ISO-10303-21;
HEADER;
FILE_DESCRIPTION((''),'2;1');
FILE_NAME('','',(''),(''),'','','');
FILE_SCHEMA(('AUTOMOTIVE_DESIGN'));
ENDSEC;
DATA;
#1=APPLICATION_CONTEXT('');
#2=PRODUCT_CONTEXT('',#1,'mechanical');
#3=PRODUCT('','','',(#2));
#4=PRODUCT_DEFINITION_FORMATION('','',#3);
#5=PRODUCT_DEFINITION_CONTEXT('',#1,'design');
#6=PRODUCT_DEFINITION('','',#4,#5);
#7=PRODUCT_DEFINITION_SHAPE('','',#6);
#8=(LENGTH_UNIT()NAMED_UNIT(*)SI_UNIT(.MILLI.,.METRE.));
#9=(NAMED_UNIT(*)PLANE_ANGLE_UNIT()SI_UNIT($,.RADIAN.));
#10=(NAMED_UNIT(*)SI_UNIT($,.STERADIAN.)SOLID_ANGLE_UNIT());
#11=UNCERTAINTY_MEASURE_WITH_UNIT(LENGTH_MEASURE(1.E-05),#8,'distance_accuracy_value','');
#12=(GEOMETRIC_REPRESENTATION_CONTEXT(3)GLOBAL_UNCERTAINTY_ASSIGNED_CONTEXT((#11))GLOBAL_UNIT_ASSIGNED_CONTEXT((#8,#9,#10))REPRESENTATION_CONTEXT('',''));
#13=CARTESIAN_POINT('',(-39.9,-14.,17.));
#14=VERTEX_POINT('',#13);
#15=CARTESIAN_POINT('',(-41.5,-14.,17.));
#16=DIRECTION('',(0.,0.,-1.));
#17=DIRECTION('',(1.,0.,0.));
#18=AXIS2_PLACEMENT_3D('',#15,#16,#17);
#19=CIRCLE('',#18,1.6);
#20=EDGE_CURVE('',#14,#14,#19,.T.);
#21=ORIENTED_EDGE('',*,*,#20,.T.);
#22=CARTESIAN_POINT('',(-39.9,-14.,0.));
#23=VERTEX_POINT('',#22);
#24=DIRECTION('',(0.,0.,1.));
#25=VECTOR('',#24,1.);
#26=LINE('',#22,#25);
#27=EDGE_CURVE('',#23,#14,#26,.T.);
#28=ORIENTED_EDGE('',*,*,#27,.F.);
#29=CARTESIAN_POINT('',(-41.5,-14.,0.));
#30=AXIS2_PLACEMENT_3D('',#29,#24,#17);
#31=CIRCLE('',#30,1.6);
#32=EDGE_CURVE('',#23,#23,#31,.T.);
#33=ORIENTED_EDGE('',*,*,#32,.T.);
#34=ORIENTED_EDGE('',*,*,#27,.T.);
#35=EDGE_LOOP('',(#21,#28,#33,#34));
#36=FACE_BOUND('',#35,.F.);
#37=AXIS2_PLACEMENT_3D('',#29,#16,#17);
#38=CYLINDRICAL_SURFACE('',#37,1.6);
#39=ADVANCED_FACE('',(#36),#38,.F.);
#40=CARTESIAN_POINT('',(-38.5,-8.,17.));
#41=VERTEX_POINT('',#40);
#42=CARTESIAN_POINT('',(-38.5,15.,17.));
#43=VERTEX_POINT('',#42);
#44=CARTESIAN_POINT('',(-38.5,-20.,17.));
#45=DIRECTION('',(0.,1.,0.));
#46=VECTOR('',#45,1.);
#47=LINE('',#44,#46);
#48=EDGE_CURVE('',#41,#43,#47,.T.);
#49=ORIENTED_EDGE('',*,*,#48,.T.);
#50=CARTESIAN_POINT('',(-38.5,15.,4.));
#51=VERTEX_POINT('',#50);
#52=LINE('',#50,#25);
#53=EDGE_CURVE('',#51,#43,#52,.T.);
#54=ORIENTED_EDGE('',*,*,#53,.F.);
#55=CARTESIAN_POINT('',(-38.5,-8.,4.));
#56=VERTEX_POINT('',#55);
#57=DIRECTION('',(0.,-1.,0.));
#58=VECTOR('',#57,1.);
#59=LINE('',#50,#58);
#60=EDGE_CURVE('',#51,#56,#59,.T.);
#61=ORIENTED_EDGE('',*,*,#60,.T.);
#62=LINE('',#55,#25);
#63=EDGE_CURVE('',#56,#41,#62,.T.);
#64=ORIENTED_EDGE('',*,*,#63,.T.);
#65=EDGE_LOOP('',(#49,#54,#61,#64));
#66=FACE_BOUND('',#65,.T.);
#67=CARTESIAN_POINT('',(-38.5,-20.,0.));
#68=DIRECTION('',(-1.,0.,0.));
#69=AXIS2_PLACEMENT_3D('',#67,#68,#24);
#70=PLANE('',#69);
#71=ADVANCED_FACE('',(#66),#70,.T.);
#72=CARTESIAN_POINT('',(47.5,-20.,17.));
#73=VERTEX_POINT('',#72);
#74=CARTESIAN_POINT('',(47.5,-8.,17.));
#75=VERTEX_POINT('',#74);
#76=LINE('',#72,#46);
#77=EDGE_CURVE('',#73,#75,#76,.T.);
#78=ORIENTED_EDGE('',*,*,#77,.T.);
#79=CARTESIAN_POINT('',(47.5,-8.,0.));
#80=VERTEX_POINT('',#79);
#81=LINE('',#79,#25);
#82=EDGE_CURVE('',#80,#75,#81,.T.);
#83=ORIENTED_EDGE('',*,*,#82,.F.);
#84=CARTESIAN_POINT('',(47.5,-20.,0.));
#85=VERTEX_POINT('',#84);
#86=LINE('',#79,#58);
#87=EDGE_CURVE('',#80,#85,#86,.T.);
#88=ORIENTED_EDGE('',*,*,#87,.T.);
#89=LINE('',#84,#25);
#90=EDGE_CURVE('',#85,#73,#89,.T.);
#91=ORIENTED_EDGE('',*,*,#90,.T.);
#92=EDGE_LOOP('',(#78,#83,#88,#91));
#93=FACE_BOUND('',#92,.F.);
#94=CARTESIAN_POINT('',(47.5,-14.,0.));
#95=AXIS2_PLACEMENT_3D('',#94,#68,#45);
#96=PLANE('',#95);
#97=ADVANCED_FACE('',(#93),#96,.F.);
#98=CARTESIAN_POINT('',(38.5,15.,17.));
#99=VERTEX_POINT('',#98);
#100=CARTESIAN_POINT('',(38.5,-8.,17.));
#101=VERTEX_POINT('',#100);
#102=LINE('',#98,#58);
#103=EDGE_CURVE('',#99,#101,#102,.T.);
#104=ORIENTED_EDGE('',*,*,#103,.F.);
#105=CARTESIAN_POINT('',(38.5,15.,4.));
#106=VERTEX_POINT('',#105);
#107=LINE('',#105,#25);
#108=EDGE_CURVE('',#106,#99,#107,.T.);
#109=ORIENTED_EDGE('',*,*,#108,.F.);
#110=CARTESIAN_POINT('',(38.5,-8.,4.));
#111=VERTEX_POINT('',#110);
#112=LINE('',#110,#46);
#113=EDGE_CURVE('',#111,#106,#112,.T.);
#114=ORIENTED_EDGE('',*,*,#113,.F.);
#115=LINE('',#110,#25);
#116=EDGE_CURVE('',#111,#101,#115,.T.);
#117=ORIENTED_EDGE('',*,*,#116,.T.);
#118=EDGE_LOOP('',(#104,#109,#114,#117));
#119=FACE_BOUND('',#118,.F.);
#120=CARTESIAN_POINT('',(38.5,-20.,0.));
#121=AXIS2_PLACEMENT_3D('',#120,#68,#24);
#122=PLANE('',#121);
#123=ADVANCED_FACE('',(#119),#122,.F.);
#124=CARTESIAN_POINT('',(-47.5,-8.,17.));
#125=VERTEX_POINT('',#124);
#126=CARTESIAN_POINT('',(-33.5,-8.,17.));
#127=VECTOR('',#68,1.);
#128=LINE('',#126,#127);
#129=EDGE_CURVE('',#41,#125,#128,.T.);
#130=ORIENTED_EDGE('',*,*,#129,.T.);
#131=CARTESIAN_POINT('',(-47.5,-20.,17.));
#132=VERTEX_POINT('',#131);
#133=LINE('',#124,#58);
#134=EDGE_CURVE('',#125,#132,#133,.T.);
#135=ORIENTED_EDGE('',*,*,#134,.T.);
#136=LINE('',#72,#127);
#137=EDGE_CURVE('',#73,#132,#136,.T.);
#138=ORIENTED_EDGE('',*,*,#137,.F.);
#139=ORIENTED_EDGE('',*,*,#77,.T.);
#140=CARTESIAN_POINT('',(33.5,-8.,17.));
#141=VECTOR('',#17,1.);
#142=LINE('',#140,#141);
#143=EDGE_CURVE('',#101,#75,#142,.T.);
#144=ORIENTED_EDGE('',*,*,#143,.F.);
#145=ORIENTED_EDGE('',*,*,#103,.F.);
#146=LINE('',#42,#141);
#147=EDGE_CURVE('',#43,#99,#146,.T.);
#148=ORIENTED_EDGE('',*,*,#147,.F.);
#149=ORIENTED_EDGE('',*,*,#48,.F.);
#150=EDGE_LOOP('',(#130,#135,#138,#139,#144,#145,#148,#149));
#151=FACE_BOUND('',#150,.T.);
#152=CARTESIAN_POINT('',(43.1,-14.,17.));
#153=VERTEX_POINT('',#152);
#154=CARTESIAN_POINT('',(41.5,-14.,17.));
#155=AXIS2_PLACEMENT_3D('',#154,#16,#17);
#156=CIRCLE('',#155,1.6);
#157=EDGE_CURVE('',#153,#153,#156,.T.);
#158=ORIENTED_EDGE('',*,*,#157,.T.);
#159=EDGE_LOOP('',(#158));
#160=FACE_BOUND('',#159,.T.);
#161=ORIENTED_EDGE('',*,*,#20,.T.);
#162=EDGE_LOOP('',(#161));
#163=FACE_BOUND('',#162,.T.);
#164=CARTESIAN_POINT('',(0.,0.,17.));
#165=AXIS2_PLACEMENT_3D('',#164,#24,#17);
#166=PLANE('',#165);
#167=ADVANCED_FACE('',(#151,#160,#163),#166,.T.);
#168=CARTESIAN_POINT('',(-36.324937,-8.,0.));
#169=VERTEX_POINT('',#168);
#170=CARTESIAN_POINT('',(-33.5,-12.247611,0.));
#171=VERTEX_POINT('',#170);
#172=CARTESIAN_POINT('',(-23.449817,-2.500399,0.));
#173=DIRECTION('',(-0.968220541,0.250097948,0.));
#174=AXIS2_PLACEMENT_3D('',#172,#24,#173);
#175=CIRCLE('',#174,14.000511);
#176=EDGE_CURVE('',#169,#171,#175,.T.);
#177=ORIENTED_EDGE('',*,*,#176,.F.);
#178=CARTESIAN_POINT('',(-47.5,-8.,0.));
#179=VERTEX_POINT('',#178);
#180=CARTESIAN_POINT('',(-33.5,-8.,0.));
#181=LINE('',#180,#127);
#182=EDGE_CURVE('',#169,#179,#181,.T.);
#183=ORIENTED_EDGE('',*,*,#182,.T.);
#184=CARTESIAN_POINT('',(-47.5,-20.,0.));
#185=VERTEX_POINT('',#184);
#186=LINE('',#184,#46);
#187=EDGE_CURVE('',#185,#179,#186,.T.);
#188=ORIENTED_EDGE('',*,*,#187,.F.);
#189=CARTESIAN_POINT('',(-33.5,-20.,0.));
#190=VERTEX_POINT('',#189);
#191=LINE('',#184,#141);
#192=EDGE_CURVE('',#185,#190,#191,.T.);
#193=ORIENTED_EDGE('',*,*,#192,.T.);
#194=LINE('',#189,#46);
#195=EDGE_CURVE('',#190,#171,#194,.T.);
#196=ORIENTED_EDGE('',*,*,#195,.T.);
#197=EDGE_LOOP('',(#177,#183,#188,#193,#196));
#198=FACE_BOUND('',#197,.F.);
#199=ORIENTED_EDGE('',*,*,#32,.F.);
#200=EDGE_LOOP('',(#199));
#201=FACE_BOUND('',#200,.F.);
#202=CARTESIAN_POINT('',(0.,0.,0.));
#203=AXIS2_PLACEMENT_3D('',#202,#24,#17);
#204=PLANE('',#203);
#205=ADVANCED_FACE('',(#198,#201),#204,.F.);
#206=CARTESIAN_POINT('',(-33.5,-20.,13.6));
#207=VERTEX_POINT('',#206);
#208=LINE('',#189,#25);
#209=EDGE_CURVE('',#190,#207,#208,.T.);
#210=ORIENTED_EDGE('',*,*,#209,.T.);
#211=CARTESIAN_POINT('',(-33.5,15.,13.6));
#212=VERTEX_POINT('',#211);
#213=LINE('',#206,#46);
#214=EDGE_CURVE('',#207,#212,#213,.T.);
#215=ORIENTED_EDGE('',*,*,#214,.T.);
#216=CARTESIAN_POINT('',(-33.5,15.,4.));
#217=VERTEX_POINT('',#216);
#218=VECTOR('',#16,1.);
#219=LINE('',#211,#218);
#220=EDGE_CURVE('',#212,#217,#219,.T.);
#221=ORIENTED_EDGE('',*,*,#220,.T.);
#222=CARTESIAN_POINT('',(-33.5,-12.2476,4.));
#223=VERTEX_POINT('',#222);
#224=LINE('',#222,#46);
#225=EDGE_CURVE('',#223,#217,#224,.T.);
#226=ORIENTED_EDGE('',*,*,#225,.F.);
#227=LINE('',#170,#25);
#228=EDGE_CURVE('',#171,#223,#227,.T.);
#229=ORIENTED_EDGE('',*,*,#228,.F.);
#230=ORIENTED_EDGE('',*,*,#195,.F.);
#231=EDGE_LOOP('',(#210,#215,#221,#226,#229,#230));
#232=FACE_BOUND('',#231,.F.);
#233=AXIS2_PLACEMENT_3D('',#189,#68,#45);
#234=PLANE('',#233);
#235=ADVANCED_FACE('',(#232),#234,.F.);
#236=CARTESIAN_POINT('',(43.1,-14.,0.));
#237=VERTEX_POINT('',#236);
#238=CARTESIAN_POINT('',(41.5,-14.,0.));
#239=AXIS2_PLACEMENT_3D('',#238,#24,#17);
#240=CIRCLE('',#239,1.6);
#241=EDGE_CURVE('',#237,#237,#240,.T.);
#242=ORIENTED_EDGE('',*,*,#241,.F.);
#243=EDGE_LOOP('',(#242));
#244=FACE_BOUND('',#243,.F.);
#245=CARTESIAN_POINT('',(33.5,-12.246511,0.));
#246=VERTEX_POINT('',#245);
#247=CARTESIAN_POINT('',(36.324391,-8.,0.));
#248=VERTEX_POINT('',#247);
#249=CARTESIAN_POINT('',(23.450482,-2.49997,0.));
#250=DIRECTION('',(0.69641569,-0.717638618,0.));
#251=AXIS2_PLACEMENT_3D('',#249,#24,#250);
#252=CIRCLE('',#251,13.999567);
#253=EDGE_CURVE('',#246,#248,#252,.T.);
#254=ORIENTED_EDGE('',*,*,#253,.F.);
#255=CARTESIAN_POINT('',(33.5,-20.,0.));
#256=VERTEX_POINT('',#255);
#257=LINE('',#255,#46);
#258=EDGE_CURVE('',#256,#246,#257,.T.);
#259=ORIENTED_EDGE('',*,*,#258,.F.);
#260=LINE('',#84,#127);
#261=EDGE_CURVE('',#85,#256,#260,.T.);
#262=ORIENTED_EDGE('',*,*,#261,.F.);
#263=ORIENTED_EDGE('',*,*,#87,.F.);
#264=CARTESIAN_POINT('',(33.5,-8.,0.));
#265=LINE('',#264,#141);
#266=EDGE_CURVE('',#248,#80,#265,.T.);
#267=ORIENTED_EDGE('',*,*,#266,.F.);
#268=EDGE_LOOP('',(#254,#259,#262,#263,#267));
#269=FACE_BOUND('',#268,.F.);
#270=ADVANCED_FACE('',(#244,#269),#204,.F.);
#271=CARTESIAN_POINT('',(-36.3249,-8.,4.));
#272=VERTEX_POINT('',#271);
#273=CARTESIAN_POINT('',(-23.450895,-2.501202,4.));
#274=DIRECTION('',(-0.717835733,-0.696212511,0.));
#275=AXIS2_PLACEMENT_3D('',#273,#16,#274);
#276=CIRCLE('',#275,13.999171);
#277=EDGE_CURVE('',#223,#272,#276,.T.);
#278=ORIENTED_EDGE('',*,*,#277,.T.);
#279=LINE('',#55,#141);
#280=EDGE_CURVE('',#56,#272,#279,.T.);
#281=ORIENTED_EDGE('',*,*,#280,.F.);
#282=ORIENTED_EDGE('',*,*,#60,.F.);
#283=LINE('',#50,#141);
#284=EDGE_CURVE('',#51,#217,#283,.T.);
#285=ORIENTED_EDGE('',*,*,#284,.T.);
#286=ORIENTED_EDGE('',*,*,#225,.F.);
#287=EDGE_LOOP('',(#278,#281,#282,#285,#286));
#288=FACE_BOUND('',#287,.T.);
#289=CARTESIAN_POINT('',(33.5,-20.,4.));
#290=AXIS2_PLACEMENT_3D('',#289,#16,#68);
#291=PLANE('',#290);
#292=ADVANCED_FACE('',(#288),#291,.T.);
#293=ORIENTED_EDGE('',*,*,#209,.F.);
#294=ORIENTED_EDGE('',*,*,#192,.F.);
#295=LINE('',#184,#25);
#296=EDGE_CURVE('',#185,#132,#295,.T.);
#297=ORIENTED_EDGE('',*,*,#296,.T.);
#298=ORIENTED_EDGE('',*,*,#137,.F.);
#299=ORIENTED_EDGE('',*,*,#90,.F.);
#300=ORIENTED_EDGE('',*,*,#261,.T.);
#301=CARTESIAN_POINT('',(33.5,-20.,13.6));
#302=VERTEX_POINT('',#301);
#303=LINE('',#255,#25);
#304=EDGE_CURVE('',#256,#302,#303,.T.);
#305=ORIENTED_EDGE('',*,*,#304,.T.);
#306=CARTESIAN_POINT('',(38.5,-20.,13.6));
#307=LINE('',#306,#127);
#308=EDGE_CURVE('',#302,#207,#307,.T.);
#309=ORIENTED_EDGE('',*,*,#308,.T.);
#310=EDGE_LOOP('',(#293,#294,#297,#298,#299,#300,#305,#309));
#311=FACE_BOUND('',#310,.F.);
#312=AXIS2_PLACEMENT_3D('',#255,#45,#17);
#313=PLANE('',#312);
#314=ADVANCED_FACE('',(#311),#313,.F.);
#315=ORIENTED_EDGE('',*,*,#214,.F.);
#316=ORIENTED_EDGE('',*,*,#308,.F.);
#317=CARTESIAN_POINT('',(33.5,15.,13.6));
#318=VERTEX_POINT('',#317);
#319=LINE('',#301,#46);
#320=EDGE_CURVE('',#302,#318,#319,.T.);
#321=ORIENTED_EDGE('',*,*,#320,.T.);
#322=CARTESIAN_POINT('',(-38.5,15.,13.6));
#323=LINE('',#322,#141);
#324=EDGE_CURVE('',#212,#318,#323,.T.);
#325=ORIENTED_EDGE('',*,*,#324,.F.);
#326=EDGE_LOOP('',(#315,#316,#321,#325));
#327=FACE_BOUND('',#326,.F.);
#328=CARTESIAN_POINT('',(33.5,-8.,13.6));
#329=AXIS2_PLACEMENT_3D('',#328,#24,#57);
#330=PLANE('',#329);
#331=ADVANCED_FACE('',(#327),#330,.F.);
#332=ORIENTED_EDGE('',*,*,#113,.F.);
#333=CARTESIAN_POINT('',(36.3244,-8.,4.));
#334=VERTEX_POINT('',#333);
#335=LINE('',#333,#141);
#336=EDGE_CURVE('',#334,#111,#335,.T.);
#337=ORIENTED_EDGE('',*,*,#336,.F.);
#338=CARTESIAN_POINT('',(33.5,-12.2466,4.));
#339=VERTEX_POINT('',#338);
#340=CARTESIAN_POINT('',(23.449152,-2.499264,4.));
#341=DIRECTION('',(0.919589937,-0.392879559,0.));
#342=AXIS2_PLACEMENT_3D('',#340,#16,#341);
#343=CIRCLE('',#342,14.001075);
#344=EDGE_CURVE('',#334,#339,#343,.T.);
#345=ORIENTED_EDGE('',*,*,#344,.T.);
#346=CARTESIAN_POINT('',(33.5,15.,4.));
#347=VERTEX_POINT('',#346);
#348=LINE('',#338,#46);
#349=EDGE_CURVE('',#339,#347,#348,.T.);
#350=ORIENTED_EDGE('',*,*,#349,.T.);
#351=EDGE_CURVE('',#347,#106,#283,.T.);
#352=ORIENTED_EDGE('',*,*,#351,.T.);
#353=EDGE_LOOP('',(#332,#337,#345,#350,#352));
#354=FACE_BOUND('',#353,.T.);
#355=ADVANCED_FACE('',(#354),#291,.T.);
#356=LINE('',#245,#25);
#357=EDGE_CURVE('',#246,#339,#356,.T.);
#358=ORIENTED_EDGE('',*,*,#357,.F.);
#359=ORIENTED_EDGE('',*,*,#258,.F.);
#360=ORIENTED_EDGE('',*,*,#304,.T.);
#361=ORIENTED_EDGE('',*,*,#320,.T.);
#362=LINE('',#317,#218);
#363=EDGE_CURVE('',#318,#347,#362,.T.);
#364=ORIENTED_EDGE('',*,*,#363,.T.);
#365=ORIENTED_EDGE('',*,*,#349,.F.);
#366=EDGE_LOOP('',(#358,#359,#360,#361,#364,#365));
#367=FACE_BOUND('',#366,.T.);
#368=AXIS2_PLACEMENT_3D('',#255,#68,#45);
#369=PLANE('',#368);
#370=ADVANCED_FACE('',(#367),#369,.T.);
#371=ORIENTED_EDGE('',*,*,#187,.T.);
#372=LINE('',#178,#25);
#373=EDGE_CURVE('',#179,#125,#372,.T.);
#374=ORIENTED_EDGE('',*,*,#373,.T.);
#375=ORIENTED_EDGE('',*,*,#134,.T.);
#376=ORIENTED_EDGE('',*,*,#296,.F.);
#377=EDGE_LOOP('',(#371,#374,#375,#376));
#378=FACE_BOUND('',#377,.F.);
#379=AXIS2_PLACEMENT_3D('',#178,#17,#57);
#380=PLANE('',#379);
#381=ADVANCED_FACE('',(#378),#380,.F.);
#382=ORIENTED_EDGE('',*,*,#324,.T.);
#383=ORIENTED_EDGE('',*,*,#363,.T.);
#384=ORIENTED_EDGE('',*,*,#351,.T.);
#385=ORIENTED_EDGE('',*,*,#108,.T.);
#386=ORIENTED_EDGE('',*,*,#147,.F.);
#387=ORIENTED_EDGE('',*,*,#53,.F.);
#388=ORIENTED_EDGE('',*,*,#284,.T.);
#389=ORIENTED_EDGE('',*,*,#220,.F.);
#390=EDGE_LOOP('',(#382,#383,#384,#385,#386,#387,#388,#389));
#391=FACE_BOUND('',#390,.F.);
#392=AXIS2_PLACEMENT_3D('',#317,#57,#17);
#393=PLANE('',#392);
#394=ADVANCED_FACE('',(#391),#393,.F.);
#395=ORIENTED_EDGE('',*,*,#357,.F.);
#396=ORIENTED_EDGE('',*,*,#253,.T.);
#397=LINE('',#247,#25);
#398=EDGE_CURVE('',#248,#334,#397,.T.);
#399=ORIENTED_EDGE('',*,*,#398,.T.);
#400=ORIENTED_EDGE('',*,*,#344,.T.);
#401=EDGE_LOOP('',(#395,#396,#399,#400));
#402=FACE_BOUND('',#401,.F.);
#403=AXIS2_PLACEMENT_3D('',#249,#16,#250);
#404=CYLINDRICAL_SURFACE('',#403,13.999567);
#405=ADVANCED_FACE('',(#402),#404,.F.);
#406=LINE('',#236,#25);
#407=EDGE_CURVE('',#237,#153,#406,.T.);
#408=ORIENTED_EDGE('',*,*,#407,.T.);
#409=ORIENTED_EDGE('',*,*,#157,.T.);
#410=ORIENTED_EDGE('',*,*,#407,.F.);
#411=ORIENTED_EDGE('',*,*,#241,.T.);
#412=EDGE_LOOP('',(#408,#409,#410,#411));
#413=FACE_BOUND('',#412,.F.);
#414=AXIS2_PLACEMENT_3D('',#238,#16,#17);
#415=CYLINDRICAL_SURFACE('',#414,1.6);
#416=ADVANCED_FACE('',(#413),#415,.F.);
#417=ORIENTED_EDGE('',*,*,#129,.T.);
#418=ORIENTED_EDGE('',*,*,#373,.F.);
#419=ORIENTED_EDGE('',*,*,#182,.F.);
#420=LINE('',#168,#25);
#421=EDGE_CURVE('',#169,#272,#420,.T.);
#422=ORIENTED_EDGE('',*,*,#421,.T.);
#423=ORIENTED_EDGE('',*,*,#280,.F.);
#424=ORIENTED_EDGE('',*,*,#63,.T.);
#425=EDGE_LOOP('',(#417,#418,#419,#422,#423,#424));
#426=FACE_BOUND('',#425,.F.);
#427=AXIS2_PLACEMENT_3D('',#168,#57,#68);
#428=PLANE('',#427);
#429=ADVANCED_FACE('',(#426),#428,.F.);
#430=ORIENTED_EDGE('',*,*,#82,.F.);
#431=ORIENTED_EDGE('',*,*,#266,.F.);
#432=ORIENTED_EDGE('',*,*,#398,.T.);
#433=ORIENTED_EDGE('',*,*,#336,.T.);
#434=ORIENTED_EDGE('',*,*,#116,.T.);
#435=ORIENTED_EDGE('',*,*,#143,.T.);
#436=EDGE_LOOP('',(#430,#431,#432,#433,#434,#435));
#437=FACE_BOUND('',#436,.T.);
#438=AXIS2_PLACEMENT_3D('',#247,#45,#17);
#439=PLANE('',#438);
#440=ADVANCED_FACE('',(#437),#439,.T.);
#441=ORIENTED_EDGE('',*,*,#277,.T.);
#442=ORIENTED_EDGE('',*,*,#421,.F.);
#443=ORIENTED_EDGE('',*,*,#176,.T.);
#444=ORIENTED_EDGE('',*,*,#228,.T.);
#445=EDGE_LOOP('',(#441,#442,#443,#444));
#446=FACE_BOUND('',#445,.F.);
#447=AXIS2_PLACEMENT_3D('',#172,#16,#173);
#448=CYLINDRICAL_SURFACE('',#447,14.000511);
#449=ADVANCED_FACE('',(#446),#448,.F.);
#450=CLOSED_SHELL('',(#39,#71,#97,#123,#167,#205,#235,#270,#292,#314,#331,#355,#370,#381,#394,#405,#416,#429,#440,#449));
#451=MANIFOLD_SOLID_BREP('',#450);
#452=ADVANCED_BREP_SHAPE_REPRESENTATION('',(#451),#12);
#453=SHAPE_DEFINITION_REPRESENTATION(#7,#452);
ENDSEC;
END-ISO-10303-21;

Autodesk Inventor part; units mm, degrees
ref_plane "YZ Plane" through (0, 0, 0) normal (1, 0, 0) x (0, 1, 0)
ref_plane "XZ Plane" through (0, 0, 0) normal (0, 1, 0) x (-1, 0, 0)
sketch "Boceto1" plane through (0, 0, 0) normal (0, 0, 1) x (1, 0, 0)
  line L0 (9.8963, 1.0011) -> (-9.8944, 1.0011) projected
  arc A0 (-33.0611, -12.6806) -> (-9.8944, 1.0011) centre (-23.4499, -2.5004) ccw projected
  line L1 (-33.0611, -12.6806) -> (-33.2, -12.6806) projected
  line L2 (-33.2, -12.6806) -> (-33.2, -12.5477) projected
  arc A1 (-37.0054, 1.0011) -> (-33.2, -12.5477) centre (-23.4499, -2.5004) ccw projected
  line L3 (-37.0054, 1.0011) -> (-47.5, 1.0011) projected
  line L4 (-47.5, 1.0011) -> (-47.5, -20) projected
  line L5 (-47.5, -20) -> (47.5, -20) projected
  line L6 (47.5, -20) -> (47.5, 1.0011) projected
  line L7 (47.5, 1.0011) -> (37.0052, 1.0011) projected
  arc A2 (33.2, -12.5466) -> (37.0052, 1.0011) centre (23.4507, -2.5001) ccw projected
  line L8 (33.2, -12.5466) -> (33.2, -12.6806) projected
  line L9 (33.2, -12.6806) -> (33.06, -12.6806) projected
  arc A3 (9.8963, 1.0011) -> (33.06, -12.6806) centre (23.4507, -2.5001) ccw projected
  circle A4 centre (40.9504, -2.4989) radius 2.1 projected
  circle A5 centre (5.9501, -2.5002) radius 2.1 projected
  circle A6 centre (-5.9495, -2.4989) radius 2.1 projected
  circle A7 centre (-40.9494, -2.4994) radius 2.1 projected
  line L10 (47.5, -20) -> (41.5, -20)
  line L11 (41.5, -20) -> (41.5, -14)
  line L12 (41.5, -14) -> (47.5, -14)
  line L13 (47.5, -14) -> (47.5, -20)
  circle A8 centre (41.5, -14) radius 1.6
  line L14 (-47.5, -20) -> (-41.5, -20)
  line L15 (-41.5, -20) -> (-41.5, -14)
  line L16 (-41.5, -14) -> (-47.5, -14)
  line L17 (-47.5, -14) -> (-47.5, -20)
  circle A9 centre (-41.5, -14) radius 1.6
  line L18 (47.5, -20) -> (33.5, -20)
  line L19 (33.5, -20) -> (33.5, -8)
  line L20 (33.5, -8) -> (47.5, -8)
  line L21 (47.5, -8) -> (47.5, -20)
  line L22 (-47.5, -20) -> (-33.5, -20)
  line L23 (-33.5, -20) -> (-33.5, -8)
  line L24 (-33.5, -8) -> (-47.5, -8)
  line L25 (-47.5, -8) -> (-47.5, -20)
  line L26 (33.2, -20.6806) -> (-33.2, -20.6806) projected
  line L27 (33.2, -12.6806) -> (33.2, -20.6806) projected
  line L28 (33.2, -12.6806) -> (30.95, -12.6806) projected
  arc A10 (25.95, -17.6806) -> (30.95, -12.6806) centre (25.95, -12.6806) ccw projected
  line L29 (25.95, -17.6806) -> (-25.95, -17.6806) projected
  arc A11 (-30.95, -12.6806) -> (-25.95, -17.6806) centre (-25.95, -12.6806) ccw projected
  line L30 (-33.2, -12.6806) -> (-30.95, -12.6806) projected
  line L31 (-33.2, -20.6806) -> (-33.2, -12.6806) projected
  line L32 (33.2, 62.3194) -> (33.2, -12.6806)
  line L33 (-33.2, -12.6806) -> (-33.2, 62.3194)
  circle A12 centre (-41.5, -14) radius 2.1 projected
  circle A13 centre (41.5, -14) radius 2.1 projected
  point P0 (0, 0)
  point P1 (47.5, -8)
  point P2 (33.5, -20)
  point P3 (-33.5, -20)
  point P4 (-47.5, -8)
  point P5 (-33.5, -12.2476)
  point P6 (-36.3249, -8)
  point P7 (36.3244, -8)
  point P8 (33.5, -12.2466)
  dimension "d0" = 6
  dimension "d1" = 6
  dimension "d2" = 3.2
  dimension "d3" = 6
  dimension "d4" = 6
  dimension "d5" = 3.2
  dimension "d6" = 14
  dimension "d7" = 12
  dimension "d8" = 14
  dimension "d9" = 12
ref_plane "Plano de trabajo1" through (-47.5, -94.8095, 26) normal (0, 0, 1) x (1, 0.0000001, 0)
extrude "Extrusión1" add sketch "Boceto1" along normal blind 17 contours A2 L20 L6 L12 A13 L11 L5 L19 | L23 L5 L15 A12 L16 L4 L24 A1 | L11 A13 L12 L6 L5 | L5 L4 L16 A12 L15 | A13 L12 A8 L11 | L11 A8 L12 A13 | A12 L16 A9 L15 | L15 A9 L16 A12
sketch "Boceto2" plane through (33.5, -20, 0) normal (-1, 0, 0) x (0, 0, 1)
  line L0 (0, 7.7534) -> (0, 0) projected
  line L1 (0, 0) -> (17, 0) projected
  line L2 (17, 7.7534) -> (17, 0) projected
  line L3 (0, 7.7534) -> (17, 7.7534) projected
  line L4 (13, 7.3194) -> (13, -0.6806) projected
  line L5 (13.6, 7.7534) -> (13.6, -0.6806)
  line L6 (0, 12) -> (0, 7.7534) projected
  line L7 (0, 7.7534) -> (17, 7.7534) projected
  line L8 (17, 12) -> (17, 7.7534) projected
  line L9 (0, 12) -> (17, 12) projected
  line L10 (13.6, 0) -> (17, 0)
  line L11 (17, 0) -> (17, 35)
  line L12 (17, 35) -> (13.6, 35)
  line L13 (13.6, 35) -> (13.6, 0)
  point P0 (0, 20)
  point P1 (17, 7.7534)
  point P2 (17, 12)
  point P3 (13.6, 12)
  point P4 (17, 12)
  point P5 (0, 7.7534)
  point P6 (17, 7.7534)
  point P7 (17, 7.7534)
  point P8 (13.6, 7.7534)
  point P9 (0, 7.7534)
  point P10 (17, 7.7534)
  point P11 (0, 7.7534)
  dimension "d12" = 0.6
  dimension "d13" = 35
extrude "Extrusión2" add sketch "Boceto2" along normal blind 72 and the other way blind 5 contours L13 L9 L8 L3 | L3 L2 L1 L5 | L13 L12 L11 L9
sketch "Boceto3" plane through (33.5, -20, 13.6) normal (0, 0, -1) x (-1, 0, 0)
  line L0 (67, 7.7524) -> (67, 0) projected
  arc A0 (67, 7.7524) -> (69.8249, 12) centre (56.9499, 17.4996) ccw projected
  line L1 (72, 12) -> (69.8249, 12) projected
  line L2 (72, 35) -> (72, 12) projected
  line L3 (72, 35) -> (-5, 35) projected
  line L4 (-5, 12) -> (-5, 35) projected
  line L5 (-2.8244, 12) -> (-5, 12) projected
  arc A1 (-2.8244, 12) -> (0, 7.7534) centre (10.0493, 17.4999) ccw projected
  line L6 (0, 0) -> (0, 7.7534) projected
  line L7 (0, 0) -> (67, 0) projected
  line L8 (0.3, 7.3194) -> (0.3, 82.3194) projected
  line L9 (0, 7.7534) -> (0.3, 7.7534)
  line L10 (66.7, 7.3194) -> (66.7, 82.3194) projected
  line L11 (67, 7.7524) -> (67, 0) projected
  line L12 (67, 7.7524) -> (67, 36)
  line L13 (0, 7.7534) -> (0, 35.331)
  point P0 (33.5, 20)
  point P1 (0.3, 35)
  point P2 (67, 35)
  point P3 (0, 35)
extrude "Extrusión3" add sketch "Boceto3" along normal blind 9.6 contours L12 L3 L2 L1 A0 | A1 L5 L4 L3 L13
properties part number "Tapadera cremallera"
